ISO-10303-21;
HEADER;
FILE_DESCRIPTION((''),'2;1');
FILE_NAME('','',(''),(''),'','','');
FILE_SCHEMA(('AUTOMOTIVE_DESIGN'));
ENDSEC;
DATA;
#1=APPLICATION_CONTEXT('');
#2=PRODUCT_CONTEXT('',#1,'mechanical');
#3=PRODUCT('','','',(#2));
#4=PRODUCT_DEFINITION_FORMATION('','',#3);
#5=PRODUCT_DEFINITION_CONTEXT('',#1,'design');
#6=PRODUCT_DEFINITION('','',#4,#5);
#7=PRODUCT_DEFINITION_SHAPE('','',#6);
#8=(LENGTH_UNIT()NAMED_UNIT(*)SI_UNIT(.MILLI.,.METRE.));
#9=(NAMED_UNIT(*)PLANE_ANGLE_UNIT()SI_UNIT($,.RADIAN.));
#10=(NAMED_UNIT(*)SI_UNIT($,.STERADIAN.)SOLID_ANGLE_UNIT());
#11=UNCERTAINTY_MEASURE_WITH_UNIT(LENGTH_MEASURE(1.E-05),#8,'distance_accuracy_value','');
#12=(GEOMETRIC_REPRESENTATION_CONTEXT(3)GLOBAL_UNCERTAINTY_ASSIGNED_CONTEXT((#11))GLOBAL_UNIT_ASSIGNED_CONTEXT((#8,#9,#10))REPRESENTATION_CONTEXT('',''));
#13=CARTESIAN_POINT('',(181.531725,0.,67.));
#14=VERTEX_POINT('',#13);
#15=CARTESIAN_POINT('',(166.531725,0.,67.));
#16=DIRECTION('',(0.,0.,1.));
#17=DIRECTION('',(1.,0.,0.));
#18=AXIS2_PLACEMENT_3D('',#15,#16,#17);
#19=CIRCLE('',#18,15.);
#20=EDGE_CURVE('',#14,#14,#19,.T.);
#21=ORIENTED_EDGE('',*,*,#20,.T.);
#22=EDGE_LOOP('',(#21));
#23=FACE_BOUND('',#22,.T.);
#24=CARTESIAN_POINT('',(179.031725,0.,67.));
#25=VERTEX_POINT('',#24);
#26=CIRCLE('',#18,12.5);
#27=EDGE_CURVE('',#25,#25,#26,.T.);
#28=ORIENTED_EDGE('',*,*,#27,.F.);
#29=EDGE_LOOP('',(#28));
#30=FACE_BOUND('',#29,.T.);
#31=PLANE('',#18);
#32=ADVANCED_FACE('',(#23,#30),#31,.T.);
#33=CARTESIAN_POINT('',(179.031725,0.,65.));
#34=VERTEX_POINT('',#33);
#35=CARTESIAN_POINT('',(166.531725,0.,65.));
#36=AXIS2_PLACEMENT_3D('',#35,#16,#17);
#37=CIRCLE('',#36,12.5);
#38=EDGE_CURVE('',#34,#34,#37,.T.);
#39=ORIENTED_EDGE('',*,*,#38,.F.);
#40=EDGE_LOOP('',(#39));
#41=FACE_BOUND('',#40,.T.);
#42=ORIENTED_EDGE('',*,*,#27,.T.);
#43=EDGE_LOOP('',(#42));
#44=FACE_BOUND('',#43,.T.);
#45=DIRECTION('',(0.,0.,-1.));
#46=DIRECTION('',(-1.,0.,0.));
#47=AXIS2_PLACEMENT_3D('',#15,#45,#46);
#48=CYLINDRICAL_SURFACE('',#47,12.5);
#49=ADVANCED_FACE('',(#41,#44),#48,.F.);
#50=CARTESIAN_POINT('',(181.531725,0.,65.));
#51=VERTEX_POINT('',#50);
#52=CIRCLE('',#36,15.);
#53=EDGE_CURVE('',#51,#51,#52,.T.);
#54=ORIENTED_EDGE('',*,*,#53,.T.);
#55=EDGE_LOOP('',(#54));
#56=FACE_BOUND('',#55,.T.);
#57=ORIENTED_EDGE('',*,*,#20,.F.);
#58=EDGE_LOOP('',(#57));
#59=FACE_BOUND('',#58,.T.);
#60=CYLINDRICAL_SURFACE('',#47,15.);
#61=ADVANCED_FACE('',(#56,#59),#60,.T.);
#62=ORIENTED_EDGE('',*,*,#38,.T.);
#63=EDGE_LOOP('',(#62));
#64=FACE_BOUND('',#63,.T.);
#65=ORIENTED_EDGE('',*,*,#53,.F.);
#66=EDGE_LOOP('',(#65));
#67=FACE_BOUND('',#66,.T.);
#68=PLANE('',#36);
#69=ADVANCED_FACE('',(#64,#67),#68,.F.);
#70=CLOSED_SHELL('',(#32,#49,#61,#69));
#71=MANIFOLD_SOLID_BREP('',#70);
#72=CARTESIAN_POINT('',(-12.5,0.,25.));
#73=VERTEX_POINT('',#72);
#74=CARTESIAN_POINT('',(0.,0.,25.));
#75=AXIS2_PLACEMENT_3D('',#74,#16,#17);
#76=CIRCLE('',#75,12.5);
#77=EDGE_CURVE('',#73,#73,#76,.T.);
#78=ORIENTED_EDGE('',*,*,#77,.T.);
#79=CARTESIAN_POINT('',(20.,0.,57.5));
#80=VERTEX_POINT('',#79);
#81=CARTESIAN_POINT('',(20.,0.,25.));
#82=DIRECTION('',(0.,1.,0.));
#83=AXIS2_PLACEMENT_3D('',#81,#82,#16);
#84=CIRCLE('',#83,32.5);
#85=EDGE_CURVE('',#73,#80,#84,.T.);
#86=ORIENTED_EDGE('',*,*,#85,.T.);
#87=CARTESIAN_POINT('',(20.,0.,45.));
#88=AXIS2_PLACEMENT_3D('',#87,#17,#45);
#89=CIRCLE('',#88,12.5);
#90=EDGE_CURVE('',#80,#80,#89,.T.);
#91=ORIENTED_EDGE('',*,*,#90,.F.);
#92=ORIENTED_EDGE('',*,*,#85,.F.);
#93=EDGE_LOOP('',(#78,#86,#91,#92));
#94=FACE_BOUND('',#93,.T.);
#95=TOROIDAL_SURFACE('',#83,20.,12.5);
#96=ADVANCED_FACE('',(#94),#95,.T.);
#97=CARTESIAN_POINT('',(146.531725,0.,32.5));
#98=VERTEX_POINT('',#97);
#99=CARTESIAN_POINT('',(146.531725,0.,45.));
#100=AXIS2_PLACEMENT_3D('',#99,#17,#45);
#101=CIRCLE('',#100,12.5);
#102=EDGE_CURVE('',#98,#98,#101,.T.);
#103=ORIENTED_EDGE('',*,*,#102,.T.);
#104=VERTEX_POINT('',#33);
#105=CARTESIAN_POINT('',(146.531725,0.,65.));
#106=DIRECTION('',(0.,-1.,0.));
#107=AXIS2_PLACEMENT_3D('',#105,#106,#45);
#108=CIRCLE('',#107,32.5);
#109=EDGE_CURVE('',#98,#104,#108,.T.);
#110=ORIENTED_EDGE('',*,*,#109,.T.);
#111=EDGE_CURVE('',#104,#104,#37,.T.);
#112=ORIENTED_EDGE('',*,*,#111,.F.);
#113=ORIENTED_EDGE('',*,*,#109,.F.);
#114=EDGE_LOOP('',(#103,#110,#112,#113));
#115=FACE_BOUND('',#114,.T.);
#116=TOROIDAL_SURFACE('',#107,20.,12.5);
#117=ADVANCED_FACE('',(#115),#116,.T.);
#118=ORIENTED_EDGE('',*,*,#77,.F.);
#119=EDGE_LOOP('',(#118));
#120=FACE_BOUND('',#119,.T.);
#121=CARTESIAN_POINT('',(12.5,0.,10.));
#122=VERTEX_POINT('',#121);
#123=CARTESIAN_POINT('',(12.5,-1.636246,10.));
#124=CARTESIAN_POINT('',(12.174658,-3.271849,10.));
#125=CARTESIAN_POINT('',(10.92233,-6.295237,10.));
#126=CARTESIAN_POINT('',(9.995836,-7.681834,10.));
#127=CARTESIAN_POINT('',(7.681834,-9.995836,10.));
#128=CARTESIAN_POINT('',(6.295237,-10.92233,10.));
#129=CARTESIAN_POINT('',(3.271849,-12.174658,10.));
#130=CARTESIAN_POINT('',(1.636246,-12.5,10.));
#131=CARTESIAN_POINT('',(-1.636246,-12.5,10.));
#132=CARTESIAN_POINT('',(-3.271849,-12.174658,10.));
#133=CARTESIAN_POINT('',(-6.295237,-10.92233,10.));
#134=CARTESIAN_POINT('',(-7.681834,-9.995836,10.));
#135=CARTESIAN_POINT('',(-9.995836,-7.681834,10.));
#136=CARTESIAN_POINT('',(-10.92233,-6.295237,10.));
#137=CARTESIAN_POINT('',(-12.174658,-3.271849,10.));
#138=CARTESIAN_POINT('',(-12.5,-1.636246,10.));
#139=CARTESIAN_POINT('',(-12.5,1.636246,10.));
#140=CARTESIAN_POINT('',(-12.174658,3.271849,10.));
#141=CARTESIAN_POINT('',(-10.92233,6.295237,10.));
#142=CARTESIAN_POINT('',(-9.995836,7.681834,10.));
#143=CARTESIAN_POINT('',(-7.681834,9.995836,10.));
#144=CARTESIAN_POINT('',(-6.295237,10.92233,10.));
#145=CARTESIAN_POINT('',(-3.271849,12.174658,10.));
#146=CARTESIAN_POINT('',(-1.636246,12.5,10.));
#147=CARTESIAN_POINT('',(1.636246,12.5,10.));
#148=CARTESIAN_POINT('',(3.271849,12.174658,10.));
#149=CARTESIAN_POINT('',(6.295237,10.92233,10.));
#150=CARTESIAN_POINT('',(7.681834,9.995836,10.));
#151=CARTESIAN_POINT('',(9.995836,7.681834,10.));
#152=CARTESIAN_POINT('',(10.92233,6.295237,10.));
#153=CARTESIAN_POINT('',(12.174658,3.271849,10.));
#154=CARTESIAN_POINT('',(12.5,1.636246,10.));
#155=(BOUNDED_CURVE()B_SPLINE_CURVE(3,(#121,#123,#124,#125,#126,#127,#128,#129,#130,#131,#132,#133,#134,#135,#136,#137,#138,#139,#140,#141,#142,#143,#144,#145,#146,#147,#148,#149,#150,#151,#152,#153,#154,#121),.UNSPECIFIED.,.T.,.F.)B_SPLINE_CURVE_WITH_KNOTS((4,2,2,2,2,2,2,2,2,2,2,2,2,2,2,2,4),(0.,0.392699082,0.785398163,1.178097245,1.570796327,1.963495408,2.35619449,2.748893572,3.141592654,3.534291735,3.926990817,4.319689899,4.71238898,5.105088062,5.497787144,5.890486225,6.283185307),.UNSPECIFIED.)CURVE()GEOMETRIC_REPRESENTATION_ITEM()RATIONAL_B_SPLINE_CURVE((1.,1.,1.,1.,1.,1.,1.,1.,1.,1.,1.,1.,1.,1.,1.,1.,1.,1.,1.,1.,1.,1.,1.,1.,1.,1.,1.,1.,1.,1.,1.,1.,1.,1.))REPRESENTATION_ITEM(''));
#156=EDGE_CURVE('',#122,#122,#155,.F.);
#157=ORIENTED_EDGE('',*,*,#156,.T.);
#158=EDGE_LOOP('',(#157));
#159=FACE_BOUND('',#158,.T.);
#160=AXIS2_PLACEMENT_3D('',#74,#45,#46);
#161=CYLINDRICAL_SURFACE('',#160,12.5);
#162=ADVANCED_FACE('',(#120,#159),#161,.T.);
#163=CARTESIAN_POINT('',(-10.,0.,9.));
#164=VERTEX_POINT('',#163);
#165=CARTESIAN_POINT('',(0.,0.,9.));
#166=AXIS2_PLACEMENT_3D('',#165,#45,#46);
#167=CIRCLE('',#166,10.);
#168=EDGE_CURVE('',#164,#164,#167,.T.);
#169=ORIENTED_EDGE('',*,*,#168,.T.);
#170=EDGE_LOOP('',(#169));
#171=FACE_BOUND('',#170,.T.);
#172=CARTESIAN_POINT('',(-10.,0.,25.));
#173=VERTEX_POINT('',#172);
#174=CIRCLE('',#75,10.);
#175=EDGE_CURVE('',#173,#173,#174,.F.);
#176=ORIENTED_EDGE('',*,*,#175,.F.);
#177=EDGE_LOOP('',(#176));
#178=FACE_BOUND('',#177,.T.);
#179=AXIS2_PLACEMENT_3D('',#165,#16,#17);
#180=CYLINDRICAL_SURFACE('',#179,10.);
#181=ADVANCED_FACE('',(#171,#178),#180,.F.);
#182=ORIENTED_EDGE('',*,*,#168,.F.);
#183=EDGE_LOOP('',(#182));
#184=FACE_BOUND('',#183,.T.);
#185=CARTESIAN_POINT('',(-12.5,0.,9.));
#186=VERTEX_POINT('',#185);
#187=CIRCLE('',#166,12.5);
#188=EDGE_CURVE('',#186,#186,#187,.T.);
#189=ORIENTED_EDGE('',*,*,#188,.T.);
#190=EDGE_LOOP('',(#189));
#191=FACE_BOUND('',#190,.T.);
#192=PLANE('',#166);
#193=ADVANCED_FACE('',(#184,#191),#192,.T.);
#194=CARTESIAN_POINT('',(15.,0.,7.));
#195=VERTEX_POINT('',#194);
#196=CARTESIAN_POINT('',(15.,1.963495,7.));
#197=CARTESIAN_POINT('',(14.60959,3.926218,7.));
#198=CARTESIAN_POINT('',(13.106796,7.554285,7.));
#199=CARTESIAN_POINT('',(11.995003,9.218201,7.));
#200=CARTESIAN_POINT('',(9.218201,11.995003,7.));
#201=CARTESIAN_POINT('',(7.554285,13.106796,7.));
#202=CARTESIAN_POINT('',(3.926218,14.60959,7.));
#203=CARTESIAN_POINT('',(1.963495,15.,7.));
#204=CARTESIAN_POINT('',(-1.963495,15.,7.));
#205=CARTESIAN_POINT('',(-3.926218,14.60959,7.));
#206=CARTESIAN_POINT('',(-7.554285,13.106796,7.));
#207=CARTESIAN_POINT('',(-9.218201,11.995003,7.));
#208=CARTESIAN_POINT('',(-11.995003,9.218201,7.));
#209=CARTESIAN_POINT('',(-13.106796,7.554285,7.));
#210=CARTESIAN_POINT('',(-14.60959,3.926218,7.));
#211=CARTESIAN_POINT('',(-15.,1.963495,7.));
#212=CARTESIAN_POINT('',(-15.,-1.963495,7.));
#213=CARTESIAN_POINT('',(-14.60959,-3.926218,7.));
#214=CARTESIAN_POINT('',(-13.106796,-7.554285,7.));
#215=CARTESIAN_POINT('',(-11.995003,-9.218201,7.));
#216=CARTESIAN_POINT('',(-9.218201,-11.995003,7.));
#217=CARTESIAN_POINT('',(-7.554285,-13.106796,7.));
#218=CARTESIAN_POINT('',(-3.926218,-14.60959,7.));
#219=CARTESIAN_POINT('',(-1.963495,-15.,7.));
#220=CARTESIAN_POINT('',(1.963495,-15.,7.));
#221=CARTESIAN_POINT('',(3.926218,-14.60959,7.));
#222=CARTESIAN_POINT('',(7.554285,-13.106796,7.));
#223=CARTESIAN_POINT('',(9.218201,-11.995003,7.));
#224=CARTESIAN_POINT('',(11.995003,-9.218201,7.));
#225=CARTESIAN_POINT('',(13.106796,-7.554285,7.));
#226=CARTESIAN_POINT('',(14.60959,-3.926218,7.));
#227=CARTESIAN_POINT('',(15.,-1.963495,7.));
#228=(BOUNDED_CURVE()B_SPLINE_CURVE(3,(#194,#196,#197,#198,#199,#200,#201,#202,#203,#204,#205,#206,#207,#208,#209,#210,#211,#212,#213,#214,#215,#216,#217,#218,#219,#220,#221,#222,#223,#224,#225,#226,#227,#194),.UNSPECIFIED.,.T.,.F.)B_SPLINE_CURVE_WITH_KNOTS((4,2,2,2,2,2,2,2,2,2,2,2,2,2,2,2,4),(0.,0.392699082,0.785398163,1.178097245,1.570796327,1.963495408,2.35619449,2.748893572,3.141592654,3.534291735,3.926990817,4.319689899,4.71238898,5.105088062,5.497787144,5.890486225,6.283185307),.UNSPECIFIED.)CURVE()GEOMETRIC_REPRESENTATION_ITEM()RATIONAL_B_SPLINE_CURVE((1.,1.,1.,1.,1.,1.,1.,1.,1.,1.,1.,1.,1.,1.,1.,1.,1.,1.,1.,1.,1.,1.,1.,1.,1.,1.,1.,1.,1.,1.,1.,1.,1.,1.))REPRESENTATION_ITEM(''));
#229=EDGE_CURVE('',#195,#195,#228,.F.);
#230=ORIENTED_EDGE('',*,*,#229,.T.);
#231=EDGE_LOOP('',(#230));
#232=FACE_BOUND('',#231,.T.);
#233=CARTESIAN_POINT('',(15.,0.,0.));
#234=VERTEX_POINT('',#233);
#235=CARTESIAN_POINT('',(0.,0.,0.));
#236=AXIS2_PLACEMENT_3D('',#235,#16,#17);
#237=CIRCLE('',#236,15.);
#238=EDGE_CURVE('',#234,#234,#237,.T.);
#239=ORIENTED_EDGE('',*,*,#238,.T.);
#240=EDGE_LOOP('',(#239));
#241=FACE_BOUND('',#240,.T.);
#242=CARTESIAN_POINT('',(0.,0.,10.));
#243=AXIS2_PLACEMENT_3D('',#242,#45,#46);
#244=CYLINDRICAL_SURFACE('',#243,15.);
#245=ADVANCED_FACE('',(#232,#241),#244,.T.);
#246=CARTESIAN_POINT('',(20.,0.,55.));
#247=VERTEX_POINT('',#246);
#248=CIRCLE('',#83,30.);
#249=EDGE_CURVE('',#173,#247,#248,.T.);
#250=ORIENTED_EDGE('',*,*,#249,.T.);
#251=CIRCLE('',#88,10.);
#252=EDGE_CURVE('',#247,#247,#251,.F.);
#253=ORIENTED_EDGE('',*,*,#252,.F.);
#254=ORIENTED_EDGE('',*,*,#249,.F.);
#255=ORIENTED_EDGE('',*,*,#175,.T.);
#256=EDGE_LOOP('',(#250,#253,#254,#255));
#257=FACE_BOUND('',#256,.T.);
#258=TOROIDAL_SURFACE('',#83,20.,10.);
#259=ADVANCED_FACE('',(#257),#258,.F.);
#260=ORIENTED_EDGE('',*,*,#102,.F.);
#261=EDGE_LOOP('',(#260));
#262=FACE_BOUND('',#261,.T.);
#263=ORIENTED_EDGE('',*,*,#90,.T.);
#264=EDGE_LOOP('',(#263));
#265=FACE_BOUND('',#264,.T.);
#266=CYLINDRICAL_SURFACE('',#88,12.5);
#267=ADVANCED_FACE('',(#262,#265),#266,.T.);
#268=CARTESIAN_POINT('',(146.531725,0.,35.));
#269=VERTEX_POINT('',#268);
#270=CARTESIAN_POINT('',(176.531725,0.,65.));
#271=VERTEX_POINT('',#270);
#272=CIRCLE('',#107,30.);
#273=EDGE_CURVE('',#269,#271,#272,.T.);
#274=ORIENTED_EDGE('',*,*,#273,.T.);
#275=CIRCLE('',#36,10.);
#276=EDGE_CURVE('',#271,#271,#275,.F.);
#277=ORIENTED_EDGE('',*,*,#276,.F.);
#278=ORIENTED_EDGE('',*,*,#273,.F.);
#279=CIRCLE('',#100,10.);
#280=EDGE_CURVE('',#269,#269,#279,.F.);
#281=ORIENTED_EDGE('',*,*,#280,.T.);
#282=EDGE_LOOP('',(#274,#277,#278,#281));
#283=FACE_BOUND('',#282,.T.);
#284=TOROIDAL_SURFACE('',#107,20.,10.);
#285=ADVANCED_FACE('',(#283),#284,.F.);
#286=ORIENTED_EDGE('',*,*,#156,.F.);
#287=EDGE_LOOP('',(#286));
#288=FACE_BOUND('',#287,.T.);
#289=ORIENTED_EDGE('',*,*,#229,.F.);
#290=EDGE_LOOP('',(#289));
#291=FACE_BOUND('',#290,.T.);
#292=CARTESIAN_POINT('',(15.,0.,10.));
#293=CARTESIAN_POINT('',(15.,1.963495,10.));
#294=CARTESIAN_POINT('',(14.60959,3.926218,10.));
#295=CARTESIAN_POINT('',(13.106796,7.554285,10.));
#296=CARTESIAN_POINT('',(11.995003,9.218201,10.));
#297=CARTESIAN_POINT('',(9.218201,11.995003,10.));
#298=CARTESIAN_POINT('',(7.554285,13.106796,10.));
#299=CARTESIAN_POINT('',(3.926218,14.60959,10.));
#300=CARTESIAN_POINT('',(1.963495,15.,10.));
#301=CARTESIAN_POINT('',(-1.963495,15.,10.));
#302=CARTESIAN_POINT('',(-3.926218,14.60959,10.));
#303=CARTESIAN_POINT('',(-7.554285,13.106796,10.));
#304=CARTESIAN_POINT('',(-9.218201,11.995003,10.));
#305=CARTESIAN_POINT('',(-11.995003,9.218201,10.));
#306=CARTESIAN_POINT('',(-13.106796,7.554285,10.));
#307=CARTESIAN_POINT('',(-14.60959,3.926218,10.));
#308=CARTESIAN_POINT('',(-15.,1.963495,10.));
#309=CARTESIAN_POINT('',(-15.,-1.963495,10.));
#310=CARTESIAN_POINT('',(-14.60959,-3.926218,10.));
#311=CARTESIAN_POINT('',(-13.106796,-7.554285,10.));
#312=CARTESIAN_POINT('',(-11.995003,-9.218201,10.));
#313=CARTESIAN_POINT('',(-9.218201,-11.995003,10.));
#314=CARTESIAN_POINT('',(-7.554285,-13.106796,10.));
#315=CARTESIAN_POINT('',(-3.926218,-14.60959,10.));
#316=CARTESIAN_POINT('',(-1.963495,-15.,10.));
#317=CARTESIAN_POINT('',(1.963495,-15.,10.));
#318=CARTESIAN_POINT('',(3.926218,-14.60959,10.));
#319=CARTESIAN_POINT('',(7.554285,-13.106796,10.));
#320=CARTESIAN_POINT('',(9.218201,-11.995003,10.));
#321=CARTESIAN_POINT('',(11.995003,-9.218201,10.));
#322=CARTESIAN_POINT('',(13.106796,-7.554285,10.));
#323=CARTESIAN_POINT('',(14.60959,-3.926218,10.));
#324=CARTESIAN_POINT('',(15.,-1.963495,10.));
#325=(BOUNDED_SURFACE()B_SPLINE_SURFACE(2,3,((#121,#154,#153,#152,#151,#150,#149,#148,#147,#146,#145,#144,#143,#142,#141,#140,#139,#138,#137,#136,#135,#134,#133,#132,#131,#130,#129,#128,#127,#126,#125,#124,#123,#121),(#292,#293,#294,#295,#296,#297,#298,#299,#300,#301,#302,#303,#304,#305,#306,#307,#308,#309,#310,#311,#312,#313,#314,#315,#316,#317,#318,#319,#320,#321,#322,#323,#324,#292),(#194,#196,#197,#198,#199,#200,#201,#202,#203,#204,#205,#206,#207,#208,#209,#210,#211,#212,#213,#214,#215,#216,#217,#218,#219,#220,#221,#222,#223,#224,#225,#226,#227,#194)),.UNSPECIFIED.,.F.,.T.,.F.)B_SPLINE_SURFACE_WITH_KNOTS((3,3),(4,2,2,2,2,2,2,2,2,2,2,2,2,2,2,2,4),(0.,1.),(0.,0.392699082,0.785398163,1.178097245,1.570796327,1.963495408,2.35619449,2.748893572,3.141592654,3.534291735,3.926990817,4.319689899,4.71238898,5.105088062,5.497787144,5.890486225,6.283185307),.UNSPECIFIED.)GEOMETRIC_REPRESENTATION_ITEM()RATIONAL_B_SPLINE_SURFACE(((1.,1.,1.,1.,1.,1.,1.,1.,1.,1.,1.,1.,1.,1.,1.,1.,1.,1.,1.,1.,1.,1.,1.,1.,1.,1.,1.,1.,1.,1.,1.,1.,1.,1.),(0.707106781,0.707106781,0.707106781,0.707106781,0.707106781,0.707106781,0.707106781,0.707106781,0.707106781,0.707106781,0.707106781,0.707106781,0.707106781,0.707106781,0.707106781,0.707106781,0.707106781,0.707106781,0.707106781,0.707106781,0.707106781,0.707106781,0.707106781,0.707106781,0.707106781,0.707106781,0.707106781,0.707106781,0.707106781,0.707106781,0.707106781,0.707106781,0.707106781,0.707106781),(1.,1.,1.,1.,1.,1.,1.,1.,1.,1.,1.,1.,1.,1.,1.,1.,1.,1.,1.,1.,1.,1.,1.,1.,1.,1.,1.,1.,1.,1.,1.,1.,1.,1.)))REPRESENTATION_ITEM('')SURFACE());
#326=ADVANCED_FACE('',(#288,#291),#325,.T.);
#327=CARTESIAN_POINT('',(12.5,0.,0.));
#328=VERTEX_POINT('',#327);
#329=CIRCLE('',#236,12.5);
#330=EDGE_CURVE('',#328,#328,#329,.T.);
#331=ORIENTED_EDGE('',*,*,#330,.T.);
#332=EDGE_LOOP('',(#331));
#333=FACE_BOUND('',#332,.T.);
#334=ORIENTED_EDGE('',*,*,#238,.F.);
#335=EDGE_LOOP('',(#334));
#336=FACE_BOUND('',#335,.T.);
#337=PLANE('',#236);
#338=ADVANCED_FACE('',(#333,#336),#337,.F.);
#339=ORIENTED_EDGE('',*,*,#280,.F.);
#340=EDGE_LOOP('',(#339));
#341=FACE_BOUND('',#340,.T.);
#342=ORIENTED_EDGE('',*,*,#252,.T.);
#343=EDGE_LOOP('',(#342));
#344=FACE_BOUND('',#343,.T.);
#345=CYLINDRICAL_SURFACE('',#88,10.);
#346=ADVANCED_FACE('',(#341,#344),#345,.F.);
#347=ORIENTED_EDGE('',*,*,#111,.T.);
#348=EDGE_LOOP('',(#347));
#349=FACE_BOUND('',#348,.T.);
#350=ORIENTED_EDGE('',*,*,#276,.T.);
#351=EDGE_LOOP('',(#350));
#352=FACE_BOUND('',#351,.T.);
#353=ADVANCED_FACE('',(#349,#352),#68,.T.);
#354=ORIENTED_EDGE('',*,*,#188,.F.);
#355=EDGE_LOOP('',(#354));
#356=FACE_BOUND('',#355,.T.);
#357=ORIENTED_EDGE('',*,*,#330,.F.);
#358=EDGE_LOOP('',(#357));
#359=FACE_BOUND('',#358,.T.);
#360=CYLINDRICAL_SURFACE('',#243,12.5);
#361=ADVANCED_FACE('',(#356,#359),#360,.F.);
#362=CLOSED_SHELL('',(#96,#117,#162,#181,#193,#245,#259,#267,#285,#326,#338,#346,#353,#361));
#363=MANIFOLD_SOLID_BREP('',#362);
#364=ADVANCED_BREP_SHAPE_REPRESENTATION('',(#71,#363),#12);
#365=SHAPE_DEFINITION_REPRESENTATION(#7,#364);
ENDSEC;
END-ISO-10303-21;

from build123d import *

# Parameters (mm, degrees)
CROQUIS1_R              = 15
CROQUIS1_R_2            = 12.5
SALIENTE_EXTRUIR1_DEPTH = 10
CROQUIS2_R              = 12.5
CROQUIS2_R_2            = 10
SALIENTE_EXTRUIR2_DEPTH = 15
REDONDEO3_SIZE          = 3
REDONDEO3_SIZE_2        = 2.5
SALIENTE_EXTRUIR3_START = 1
CROQUIS3_R              = 12.5
CROQUIS3_R_2            = 10
SALIENTE_EXTRUIR3_DEPTH = 1
CROQUIS6_R              = 12.5
CROQUIS6_R_2            = 10
CROQUIS7_R              = 15
CROQUIS7_R_2            = 12.5
SALIENTE_EXTRUIR4_DEPTH = 2


with BuildPart() as part:
    # Croquis1 → Saliente-Extruir1 (new body)
    with BuildSketch(Plane.XY):
        Circle(CROQUIS1_R)
        Circle(CROQUIS1_R_2, mode=Mode.SUBTRACT)
    extrude(amount=SALIENTE_EXTRUIR1_DEPTH)

    # Redondeo3
    # an asymmetric fillet: 3, 2.5 mm, written as the material it takes off along each edge
    with BuildSketch(Plane(origin=(0, 0, 10), x_dir=(1, 0, 0), z_dir=(0, -1, 0))) as redondeo3_piece_1:
        with BuildLine():
            Bezier((15, -REDONDEO3_SIZE), (15, 0), (15 - REDONDEO3_SIZE_2, 0), weights=[1, 0.707106781, 1])
            Line((15 - REDONDEO3_SIZE_2, 0), (15, 0))
            Line((15, 0), (15, -REDONDEO3_SIZE))
        make_face()
    revolve(axis=Axis((0, 0, 10), (0, 0, 1)), mode=Mode.SUBTRACT)



with BuildPart() as body_2:
    # Croquis2 → Saliente-Extruir2 (new body)
    with BuildSketch(Plane.XY.offset(10)):
        Circle(CROQUIS2_R)
        Circle(CROQUIS2_R_2, mode=Mode.SUBTRACT)
    extrude(amount=SALIENTE_EXTRUIR2_DEPTH)


with BuildPart() as part_1:
    add(part.part)

    add(body_2.part)  # Saliente-Extruir3 merges body 2
    # Croquis3 → Saliente-Extruir3 (add)
    with BuildSketch(Plane(origin=(0, 0, 10), x_dir=(-1, 0, 0), z_dir=(0, 0, -1)).offset(SALIENTE_EXTRUIR3_START)):
        Circle(CROQUIS3_R)
        with Locations(Location((0, 0, 0), (0, 0, 180))):
            Circle(CROQUIS3_R_2, mode=Mode.SUBTRACT)
    extrude(amount=-SALIENTE_EXTRUIR3_DEPTH)

    # Barrer1: sweep along a path in Croquis5
    with BuildLine(Plane(origin=(0, 0, 0), x_dir=(1, 0, 0), z_dir=(0, 1, 0))) as barrer1_path:
        ThreePointArc((0, -25), (5.857864376, -39.142135624), (20, -45))
        Line((20, -45), (146.5317248, -45))
        ThreePointArc((146.5317248, -45), (160.673860424, -50.857864376), (166.5317248, -65))
    # Croquis6 → Barrer1 (sweep)
    with BuildSketch(Plane.XY.offset(25)):
        Circle(CROQUIS6_R)
        Circle(CROQUIS6_R_2, mode=Mode.SUBTRACT)
    sweep(path=barrer1_path.line)


with BuildPart() as body_2_2:
    # Croquis7 → Saliente-Extruir4 (new body)
    with BuildSketch(Plane.XY.offset(65)):
        with Locations((166.5317248, 0)):
            Circle(CROQUIS7_R)
        with Locations((166.5317248, 0)):
            Circle(CROQUIS7_R_2, mode=Mode.SUBTRACT)
    extrude(amount=SALIENTE_EXTRUIR4_DEPTH)


solid = Compound([part_1.part, body_2_2.part])
